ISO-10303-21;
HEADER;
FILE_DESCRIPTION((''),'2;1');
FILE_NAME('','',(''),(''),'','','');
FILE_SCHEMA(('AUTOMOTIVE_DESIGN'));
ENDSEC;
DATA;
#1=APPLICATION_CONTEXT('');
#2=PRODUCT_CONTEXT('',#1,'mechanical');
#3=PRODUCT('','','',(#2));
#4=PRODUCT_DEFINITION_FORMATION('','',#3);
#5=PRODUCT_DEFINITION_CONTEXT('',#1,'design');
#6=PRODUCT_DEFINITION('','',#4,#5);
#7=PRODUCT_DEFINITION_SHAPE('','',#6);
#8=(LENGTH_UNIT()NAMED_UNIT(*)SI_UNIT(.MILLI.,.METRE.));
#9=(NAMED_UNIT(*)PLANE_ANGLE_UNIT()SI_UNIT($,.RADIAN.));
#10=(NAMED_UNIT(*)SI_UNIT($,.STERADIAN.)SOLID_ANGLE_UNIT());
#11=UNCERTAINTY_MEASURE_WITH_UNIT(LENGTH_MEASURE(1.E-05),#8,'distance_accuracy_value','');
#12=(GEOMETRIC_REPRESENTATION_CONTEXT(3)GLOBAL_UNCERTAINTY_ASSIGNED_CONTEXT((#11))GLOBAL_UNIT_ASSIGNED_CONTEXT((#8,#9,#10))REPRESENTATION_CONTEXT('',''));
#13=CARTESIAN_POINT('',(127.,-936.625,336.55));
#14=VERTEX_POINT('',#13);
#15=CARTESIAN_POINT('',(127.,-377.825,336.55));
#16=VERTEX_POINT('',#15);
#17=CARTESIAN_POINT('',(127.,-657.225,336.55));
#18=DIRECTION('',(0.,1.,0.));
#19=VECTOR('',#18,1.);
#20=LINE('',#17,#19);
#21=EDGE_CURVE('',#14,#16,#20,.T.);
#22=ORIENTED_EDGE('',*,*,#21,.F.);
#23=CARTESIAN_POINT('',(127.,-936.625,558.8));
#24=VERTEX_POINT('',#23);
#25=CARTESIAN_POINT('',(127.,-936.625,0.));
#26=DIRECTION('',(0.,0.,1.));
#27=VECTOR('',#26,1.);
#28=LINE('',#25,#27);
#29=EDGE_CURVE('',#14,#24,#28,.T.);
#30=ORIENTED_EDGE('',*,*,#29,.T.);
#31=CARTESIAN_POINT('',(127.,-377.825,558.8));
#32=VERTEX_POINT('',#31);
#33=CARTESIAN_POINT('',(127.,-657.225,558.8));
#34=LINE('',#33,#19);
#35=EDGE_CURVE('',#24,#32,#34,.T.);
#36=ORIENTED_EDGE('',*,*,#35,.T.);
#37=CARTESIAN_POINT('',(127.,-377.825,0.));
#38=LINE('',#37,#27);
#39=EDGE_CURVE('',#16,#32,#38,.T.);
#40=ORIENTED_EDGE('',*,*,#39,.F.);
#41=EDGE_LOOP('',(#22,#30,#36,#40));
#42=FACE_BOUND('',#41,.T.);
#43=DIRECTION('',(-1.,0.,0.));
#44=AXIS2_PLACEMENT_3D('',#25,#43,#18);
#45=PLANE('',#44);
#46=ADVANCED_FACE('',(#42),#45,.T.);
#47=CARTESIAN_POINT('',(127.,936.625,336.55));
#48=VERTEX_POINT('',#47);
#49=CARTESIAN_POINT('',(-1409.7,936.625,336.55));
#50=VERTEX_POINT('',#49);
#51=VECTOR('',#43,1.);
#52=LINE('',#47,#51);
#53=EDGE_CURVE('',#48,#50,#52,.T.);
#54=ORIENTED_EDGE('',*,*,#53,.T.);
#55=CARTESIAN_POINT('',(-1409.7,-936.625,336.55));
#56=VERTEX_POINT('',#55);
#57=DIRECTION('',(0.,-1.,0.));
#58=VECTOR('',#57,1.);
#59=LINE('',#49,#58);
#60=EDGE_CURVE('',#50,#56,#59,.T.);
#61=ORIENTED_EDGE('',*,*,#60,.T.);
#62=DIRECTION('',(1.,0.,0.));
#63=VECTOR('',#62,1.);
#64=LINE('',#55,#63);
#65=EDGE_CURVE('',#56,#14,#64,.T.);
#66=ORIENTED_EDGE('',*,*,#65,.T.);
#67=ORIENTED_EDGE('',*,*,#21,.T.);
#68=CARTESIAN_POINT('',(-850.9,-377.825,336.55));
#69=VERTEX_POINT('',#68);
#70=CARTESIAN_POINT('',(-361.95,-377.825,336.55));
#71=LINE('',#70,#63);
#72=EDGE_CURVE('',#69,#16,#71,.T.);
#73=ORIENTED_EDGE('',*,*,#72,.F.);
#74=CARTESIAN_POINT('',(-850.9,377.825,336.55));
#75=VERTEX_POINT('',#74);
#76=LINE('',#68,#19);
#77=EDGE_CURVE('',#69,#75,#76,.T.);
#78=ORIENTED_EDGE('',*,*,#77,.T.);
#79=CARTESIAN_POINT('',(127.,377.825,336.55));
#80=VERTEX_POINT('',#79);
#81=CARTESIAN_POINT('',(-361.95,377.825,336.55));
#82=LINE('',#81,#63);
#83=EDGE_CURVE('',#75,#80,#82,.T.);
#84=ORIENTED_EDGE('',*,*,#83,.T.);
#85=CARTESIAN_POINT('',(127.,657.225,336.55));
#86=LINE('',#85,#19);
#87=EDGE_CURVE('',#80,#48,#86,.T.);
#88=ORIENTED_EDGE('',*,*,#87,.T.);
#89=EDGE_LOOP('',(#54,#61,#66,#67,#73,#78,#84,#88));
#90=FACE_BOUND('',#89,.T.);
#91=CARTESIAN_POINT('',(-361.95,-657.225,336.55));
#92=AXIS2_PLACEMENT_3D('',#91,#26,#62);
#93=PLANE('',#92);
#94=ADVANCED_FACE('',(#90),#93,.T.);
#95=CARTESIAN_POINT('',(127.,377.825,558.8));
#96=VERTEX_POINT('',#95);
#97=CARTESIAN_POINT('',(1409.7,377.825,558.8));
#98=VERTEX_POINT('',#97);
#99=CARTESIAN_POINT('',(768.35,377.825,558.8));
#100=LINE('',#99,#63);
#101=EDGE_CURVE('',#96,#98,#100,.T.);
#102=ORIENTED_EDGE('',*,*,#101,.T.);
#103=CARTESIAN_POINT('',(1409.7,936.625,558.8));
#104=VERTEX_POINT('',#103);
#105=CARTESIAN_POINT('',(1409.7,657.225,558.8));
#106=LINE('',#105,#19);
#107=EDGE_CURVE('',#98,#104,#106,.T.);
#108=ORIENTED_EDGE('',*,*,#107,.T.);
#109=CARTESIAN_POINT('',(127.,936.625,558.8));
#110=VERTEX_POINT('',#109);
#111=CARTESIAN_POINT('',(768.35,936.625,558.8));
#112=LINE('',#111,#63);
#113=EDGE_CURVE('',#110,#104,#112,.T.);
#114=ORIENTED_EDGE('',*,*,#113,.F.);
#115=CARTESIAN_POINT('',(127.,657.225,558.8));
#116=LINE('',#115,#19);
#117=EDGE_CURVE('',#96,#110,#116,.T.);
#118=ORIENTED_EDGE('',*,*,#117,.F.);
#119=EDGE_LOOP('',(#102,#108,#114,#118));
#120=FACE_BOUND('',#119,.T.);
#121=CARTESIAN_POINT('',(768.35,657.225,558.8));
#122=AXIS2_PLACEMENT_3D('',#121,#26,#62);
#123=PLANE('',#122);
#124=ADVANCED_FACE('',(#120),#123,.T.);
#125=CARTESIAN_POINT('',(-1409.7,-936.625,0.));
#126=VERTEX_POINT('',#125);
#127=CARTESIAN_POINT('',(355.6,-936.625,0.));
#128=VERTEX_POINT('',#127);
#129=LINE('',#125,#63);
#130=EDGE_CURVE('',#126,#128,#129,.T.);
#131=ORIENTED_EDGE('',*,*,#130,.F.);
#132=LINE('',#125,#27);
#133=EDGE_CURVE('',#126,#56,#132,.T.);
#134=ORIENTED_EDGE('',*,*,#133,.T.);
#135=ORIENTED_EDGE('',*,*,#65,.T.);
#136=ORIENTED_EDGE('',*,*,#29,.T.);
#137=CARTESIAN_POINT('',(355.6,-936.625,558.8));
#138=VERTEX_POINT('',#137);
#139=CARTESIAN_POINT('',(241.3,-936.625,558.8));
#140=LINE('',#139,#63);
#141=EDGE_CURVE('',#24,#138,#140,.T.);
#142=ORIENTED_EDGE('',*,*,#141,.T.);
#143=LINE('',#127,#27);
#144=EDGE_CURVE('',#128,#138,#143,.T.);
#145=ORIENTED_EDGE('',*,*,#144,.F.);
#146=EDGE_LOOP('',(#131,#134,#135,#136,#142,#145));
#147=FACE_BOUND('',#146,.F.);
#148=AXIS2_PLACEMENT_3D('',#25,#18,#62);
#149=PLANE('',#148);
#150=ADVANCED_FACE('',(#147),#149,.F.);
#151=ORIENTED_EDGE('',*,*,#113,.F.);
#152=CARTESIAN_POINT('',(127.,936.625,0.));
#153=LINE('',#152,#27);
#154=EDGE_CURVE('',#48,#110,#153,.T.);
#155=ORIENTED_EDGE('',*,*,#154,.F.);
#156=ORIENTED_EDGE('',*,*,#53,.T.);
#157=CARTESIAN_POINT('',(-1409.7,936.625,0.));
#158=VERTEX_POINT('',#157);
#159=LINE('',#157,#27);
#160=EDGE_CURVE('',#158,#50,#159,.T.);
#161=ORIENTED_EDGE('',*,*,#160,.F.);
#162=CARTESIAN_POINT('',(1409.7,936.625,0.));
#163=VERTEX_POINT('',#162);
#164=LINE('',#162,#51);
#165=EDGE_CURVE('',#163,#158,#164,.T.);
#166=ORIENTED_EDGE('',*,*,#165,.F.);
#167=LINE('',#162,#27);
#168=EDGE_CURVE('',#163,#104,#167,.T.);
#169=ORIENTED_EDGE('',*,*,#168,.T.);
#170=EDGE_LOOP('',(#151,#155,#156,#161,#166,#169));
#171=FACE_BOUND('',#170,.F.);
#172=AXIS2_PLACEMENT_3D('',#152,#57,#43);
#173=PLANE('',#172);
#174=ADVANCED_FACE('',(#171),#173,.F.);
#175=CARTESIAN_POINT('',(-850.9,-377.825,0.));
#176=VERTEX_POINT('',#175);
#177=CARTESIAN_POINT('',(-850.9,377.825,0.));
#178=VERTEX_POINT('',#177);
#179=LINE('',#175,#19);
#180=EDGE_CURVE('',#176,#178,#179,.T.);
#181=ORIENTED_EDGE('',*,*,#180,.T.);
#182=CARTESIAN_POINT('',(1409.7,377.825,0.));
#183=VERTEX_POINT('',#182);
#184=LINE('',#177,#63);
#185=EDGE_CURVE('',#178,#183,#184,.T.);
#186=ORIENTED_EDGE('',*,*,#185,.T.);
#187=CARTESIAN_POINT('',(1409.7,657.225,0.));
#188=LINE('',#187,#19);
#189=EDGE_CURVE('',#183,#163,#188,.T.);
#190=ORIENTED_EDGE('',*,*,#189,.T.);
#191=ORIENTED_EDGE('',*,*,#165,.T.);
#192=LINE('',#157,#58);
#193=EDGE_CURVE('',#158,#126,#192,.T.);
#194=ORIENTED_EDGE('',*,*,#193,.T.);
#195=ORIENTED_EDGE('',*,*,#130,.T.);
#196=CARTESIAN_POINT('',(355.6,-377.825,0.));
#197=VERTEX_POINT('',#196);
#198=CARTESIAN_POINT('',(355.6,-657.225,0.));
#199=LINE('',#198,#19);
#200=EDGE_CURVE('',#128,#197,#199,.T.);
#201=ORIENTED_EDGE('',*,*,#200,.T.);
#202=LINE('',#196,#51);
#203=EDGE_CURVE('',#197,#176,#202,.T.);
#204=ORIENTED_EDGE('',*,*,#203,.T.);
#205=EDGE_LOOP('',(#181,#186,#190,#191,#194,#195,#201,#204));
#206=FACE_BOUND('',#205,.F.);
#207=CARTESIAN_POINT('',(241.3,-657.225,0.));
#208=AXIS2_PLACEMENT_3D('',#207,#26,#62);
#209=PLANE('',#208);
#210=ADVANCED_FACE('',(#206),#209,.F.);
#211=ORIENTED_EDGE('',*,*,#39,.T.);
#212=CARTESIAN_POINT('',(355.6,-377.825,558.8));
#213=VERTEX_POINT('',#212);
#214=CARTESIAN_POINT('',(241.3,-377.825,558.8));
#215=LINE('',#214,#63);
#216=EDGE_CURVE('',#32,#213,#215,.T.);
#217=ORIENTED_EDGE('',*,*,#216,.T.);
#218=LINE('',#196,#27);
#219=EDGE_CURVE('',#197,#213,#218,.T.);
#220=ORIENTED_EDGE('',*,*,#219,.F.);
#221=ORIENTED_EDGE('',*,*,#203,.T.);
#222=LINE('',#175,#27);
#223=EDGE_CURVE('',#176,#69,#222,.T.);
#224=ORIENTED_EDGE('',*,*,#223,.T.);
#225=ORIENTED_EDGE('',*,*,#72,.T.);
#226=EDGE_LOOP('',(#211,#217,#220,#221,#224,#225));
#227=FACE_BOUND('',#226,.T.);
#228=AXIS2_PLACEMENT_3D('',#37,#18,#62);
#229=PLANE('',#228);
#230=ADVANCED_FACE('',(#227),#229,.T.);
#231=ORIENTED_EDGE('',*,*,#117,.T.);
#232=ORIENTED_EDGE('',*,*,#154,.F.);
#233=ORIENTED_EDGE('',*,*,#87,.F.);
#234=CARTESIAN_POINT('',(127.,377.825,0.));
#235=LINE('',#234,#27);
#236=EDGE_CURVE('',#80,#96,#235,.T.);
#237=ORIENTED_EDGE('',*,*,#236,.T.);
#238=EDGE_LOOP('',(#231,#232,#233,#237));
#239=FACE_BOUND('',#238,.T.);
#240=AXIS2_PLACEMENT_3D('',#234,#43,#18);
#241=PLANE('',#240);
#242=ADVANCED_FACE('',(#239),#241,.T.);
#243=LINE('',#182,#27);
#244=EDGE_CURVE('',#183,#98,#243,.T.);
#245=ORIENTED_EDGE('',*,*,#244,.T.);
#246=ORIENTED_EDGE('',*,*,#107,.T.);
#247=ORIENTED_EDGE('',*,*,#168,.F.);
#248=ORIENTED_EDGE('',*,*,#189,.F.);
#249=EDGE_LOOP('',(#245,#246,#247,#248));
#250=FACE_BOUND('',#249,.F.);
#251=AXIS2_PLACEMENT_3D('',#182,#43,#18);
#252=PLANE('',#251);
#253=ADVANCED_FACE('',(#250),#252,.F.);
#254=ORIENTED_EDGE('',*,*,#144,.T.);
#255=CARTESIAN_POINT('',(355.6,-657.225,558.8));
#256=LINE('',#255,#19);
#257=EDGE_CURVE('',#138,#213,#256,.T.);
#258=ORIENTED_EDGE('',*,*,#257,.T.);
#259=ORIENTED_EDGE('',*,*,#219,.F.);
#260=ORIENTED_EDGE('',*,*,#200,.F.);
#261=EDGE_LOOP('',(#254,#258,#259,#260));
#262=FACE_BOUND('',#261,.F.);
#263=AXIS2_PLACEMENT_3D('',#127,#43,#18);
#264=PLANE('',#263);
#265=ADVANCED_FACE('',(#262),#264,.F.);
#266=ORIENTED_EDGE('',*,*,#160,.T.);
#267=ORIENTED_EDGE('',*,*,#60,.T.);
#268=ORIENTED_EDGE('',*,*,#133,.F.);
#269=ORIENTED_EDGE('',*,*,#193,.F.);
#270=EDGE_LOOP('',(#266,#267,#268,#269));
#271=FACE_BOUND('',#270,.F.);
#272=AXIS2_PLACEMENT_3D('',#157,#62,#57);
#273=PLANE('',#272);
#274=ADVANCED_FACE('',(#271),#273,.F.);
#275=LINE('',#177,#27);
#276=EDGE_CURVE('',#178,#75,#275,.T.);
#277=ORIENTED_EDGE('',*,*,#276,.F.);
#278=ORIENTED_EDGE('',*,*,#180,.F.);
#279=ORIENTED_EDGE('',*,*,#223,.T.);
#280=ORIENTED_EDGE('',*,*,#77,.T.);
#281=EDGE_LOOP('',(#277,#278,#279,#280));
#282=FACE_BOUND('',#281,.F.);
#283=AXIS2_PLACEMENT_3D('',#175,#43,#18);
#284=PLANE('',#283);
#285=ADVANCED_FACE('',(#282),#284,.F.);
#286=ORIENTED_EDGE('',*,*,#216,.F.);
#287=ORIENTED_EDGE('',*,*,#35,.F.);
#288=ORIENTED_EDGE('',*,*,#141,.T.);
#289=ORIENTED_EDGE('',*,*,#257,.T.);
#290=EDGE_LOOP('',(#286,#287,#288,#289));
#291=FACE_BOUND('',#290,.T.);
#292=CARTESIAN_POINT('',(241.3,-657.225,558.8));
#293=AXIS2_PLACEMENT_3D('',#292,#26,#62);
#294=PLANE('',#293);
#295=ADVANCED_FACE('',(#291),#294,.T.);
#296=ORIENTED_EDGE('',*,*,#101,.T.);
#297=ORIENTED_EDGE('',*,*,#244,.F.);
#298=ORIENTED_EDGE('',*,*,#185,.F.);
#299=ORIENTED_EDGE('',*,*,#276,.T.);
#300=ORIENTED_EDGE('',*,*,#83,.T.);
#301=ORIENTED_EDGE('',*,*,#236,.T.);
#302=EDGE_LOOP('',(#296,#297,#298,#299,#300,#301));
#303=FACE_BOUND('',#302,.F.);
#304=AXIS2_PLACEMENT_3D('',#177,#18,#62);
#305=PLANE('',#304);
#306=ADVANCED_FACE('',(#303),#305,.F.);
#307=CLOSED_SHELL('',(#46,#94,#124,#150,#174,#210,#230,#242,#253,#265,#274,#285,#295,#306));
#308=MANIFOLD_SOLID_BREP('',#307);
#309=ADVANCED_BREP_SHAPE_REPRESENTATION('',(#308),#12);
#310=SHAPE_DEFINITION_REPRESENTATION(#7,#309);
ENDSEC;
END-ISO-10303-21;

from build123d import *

# Parameters (mm, degrees)
F0_W     = 977.9
F0_H     = 558.8
F4_DEPTH = 336.55
F0_W_2   = 228.6
F0_W_3   = 1282.7
F5_DEPTH = 558.8


# Not quite as in the source:
# - the program builds the solid bodies; features that only make, move or delete a surface that nothing else refers to are left out


with BuildPart() as f4:
    # F0 (on Top) → F4 (new body)
    with BuildSketch(Plane.XY):
        with Locations((-361.95, -657.225)):
            Rectangle(F0_W, F0_H)
        with Locations((-361.95, 657.225)):
            Rectangle(F0_W, F0_H)
        Polygon((-850.9, 936.625), (-1409.7, 936.625), (-1409.7, -936.625), (-850.9, -936.625), (-850.9, -377.825), (-850.9, 377.825), align=None)
    extrude(amount=F4_DEPTH)

    # F0 (on Top) → F5 (join)
    with BuildSketch(Plane.XY):
        with Locations((241.3, -657.225)):
            Rectangle(F0_W_2, F0_H)
        with Locations((768.35, 657.225)):
            Rectangle(F0_W_3, F0_H)
    extrude(amount=F5_DEPTH)


solid = f4.part
